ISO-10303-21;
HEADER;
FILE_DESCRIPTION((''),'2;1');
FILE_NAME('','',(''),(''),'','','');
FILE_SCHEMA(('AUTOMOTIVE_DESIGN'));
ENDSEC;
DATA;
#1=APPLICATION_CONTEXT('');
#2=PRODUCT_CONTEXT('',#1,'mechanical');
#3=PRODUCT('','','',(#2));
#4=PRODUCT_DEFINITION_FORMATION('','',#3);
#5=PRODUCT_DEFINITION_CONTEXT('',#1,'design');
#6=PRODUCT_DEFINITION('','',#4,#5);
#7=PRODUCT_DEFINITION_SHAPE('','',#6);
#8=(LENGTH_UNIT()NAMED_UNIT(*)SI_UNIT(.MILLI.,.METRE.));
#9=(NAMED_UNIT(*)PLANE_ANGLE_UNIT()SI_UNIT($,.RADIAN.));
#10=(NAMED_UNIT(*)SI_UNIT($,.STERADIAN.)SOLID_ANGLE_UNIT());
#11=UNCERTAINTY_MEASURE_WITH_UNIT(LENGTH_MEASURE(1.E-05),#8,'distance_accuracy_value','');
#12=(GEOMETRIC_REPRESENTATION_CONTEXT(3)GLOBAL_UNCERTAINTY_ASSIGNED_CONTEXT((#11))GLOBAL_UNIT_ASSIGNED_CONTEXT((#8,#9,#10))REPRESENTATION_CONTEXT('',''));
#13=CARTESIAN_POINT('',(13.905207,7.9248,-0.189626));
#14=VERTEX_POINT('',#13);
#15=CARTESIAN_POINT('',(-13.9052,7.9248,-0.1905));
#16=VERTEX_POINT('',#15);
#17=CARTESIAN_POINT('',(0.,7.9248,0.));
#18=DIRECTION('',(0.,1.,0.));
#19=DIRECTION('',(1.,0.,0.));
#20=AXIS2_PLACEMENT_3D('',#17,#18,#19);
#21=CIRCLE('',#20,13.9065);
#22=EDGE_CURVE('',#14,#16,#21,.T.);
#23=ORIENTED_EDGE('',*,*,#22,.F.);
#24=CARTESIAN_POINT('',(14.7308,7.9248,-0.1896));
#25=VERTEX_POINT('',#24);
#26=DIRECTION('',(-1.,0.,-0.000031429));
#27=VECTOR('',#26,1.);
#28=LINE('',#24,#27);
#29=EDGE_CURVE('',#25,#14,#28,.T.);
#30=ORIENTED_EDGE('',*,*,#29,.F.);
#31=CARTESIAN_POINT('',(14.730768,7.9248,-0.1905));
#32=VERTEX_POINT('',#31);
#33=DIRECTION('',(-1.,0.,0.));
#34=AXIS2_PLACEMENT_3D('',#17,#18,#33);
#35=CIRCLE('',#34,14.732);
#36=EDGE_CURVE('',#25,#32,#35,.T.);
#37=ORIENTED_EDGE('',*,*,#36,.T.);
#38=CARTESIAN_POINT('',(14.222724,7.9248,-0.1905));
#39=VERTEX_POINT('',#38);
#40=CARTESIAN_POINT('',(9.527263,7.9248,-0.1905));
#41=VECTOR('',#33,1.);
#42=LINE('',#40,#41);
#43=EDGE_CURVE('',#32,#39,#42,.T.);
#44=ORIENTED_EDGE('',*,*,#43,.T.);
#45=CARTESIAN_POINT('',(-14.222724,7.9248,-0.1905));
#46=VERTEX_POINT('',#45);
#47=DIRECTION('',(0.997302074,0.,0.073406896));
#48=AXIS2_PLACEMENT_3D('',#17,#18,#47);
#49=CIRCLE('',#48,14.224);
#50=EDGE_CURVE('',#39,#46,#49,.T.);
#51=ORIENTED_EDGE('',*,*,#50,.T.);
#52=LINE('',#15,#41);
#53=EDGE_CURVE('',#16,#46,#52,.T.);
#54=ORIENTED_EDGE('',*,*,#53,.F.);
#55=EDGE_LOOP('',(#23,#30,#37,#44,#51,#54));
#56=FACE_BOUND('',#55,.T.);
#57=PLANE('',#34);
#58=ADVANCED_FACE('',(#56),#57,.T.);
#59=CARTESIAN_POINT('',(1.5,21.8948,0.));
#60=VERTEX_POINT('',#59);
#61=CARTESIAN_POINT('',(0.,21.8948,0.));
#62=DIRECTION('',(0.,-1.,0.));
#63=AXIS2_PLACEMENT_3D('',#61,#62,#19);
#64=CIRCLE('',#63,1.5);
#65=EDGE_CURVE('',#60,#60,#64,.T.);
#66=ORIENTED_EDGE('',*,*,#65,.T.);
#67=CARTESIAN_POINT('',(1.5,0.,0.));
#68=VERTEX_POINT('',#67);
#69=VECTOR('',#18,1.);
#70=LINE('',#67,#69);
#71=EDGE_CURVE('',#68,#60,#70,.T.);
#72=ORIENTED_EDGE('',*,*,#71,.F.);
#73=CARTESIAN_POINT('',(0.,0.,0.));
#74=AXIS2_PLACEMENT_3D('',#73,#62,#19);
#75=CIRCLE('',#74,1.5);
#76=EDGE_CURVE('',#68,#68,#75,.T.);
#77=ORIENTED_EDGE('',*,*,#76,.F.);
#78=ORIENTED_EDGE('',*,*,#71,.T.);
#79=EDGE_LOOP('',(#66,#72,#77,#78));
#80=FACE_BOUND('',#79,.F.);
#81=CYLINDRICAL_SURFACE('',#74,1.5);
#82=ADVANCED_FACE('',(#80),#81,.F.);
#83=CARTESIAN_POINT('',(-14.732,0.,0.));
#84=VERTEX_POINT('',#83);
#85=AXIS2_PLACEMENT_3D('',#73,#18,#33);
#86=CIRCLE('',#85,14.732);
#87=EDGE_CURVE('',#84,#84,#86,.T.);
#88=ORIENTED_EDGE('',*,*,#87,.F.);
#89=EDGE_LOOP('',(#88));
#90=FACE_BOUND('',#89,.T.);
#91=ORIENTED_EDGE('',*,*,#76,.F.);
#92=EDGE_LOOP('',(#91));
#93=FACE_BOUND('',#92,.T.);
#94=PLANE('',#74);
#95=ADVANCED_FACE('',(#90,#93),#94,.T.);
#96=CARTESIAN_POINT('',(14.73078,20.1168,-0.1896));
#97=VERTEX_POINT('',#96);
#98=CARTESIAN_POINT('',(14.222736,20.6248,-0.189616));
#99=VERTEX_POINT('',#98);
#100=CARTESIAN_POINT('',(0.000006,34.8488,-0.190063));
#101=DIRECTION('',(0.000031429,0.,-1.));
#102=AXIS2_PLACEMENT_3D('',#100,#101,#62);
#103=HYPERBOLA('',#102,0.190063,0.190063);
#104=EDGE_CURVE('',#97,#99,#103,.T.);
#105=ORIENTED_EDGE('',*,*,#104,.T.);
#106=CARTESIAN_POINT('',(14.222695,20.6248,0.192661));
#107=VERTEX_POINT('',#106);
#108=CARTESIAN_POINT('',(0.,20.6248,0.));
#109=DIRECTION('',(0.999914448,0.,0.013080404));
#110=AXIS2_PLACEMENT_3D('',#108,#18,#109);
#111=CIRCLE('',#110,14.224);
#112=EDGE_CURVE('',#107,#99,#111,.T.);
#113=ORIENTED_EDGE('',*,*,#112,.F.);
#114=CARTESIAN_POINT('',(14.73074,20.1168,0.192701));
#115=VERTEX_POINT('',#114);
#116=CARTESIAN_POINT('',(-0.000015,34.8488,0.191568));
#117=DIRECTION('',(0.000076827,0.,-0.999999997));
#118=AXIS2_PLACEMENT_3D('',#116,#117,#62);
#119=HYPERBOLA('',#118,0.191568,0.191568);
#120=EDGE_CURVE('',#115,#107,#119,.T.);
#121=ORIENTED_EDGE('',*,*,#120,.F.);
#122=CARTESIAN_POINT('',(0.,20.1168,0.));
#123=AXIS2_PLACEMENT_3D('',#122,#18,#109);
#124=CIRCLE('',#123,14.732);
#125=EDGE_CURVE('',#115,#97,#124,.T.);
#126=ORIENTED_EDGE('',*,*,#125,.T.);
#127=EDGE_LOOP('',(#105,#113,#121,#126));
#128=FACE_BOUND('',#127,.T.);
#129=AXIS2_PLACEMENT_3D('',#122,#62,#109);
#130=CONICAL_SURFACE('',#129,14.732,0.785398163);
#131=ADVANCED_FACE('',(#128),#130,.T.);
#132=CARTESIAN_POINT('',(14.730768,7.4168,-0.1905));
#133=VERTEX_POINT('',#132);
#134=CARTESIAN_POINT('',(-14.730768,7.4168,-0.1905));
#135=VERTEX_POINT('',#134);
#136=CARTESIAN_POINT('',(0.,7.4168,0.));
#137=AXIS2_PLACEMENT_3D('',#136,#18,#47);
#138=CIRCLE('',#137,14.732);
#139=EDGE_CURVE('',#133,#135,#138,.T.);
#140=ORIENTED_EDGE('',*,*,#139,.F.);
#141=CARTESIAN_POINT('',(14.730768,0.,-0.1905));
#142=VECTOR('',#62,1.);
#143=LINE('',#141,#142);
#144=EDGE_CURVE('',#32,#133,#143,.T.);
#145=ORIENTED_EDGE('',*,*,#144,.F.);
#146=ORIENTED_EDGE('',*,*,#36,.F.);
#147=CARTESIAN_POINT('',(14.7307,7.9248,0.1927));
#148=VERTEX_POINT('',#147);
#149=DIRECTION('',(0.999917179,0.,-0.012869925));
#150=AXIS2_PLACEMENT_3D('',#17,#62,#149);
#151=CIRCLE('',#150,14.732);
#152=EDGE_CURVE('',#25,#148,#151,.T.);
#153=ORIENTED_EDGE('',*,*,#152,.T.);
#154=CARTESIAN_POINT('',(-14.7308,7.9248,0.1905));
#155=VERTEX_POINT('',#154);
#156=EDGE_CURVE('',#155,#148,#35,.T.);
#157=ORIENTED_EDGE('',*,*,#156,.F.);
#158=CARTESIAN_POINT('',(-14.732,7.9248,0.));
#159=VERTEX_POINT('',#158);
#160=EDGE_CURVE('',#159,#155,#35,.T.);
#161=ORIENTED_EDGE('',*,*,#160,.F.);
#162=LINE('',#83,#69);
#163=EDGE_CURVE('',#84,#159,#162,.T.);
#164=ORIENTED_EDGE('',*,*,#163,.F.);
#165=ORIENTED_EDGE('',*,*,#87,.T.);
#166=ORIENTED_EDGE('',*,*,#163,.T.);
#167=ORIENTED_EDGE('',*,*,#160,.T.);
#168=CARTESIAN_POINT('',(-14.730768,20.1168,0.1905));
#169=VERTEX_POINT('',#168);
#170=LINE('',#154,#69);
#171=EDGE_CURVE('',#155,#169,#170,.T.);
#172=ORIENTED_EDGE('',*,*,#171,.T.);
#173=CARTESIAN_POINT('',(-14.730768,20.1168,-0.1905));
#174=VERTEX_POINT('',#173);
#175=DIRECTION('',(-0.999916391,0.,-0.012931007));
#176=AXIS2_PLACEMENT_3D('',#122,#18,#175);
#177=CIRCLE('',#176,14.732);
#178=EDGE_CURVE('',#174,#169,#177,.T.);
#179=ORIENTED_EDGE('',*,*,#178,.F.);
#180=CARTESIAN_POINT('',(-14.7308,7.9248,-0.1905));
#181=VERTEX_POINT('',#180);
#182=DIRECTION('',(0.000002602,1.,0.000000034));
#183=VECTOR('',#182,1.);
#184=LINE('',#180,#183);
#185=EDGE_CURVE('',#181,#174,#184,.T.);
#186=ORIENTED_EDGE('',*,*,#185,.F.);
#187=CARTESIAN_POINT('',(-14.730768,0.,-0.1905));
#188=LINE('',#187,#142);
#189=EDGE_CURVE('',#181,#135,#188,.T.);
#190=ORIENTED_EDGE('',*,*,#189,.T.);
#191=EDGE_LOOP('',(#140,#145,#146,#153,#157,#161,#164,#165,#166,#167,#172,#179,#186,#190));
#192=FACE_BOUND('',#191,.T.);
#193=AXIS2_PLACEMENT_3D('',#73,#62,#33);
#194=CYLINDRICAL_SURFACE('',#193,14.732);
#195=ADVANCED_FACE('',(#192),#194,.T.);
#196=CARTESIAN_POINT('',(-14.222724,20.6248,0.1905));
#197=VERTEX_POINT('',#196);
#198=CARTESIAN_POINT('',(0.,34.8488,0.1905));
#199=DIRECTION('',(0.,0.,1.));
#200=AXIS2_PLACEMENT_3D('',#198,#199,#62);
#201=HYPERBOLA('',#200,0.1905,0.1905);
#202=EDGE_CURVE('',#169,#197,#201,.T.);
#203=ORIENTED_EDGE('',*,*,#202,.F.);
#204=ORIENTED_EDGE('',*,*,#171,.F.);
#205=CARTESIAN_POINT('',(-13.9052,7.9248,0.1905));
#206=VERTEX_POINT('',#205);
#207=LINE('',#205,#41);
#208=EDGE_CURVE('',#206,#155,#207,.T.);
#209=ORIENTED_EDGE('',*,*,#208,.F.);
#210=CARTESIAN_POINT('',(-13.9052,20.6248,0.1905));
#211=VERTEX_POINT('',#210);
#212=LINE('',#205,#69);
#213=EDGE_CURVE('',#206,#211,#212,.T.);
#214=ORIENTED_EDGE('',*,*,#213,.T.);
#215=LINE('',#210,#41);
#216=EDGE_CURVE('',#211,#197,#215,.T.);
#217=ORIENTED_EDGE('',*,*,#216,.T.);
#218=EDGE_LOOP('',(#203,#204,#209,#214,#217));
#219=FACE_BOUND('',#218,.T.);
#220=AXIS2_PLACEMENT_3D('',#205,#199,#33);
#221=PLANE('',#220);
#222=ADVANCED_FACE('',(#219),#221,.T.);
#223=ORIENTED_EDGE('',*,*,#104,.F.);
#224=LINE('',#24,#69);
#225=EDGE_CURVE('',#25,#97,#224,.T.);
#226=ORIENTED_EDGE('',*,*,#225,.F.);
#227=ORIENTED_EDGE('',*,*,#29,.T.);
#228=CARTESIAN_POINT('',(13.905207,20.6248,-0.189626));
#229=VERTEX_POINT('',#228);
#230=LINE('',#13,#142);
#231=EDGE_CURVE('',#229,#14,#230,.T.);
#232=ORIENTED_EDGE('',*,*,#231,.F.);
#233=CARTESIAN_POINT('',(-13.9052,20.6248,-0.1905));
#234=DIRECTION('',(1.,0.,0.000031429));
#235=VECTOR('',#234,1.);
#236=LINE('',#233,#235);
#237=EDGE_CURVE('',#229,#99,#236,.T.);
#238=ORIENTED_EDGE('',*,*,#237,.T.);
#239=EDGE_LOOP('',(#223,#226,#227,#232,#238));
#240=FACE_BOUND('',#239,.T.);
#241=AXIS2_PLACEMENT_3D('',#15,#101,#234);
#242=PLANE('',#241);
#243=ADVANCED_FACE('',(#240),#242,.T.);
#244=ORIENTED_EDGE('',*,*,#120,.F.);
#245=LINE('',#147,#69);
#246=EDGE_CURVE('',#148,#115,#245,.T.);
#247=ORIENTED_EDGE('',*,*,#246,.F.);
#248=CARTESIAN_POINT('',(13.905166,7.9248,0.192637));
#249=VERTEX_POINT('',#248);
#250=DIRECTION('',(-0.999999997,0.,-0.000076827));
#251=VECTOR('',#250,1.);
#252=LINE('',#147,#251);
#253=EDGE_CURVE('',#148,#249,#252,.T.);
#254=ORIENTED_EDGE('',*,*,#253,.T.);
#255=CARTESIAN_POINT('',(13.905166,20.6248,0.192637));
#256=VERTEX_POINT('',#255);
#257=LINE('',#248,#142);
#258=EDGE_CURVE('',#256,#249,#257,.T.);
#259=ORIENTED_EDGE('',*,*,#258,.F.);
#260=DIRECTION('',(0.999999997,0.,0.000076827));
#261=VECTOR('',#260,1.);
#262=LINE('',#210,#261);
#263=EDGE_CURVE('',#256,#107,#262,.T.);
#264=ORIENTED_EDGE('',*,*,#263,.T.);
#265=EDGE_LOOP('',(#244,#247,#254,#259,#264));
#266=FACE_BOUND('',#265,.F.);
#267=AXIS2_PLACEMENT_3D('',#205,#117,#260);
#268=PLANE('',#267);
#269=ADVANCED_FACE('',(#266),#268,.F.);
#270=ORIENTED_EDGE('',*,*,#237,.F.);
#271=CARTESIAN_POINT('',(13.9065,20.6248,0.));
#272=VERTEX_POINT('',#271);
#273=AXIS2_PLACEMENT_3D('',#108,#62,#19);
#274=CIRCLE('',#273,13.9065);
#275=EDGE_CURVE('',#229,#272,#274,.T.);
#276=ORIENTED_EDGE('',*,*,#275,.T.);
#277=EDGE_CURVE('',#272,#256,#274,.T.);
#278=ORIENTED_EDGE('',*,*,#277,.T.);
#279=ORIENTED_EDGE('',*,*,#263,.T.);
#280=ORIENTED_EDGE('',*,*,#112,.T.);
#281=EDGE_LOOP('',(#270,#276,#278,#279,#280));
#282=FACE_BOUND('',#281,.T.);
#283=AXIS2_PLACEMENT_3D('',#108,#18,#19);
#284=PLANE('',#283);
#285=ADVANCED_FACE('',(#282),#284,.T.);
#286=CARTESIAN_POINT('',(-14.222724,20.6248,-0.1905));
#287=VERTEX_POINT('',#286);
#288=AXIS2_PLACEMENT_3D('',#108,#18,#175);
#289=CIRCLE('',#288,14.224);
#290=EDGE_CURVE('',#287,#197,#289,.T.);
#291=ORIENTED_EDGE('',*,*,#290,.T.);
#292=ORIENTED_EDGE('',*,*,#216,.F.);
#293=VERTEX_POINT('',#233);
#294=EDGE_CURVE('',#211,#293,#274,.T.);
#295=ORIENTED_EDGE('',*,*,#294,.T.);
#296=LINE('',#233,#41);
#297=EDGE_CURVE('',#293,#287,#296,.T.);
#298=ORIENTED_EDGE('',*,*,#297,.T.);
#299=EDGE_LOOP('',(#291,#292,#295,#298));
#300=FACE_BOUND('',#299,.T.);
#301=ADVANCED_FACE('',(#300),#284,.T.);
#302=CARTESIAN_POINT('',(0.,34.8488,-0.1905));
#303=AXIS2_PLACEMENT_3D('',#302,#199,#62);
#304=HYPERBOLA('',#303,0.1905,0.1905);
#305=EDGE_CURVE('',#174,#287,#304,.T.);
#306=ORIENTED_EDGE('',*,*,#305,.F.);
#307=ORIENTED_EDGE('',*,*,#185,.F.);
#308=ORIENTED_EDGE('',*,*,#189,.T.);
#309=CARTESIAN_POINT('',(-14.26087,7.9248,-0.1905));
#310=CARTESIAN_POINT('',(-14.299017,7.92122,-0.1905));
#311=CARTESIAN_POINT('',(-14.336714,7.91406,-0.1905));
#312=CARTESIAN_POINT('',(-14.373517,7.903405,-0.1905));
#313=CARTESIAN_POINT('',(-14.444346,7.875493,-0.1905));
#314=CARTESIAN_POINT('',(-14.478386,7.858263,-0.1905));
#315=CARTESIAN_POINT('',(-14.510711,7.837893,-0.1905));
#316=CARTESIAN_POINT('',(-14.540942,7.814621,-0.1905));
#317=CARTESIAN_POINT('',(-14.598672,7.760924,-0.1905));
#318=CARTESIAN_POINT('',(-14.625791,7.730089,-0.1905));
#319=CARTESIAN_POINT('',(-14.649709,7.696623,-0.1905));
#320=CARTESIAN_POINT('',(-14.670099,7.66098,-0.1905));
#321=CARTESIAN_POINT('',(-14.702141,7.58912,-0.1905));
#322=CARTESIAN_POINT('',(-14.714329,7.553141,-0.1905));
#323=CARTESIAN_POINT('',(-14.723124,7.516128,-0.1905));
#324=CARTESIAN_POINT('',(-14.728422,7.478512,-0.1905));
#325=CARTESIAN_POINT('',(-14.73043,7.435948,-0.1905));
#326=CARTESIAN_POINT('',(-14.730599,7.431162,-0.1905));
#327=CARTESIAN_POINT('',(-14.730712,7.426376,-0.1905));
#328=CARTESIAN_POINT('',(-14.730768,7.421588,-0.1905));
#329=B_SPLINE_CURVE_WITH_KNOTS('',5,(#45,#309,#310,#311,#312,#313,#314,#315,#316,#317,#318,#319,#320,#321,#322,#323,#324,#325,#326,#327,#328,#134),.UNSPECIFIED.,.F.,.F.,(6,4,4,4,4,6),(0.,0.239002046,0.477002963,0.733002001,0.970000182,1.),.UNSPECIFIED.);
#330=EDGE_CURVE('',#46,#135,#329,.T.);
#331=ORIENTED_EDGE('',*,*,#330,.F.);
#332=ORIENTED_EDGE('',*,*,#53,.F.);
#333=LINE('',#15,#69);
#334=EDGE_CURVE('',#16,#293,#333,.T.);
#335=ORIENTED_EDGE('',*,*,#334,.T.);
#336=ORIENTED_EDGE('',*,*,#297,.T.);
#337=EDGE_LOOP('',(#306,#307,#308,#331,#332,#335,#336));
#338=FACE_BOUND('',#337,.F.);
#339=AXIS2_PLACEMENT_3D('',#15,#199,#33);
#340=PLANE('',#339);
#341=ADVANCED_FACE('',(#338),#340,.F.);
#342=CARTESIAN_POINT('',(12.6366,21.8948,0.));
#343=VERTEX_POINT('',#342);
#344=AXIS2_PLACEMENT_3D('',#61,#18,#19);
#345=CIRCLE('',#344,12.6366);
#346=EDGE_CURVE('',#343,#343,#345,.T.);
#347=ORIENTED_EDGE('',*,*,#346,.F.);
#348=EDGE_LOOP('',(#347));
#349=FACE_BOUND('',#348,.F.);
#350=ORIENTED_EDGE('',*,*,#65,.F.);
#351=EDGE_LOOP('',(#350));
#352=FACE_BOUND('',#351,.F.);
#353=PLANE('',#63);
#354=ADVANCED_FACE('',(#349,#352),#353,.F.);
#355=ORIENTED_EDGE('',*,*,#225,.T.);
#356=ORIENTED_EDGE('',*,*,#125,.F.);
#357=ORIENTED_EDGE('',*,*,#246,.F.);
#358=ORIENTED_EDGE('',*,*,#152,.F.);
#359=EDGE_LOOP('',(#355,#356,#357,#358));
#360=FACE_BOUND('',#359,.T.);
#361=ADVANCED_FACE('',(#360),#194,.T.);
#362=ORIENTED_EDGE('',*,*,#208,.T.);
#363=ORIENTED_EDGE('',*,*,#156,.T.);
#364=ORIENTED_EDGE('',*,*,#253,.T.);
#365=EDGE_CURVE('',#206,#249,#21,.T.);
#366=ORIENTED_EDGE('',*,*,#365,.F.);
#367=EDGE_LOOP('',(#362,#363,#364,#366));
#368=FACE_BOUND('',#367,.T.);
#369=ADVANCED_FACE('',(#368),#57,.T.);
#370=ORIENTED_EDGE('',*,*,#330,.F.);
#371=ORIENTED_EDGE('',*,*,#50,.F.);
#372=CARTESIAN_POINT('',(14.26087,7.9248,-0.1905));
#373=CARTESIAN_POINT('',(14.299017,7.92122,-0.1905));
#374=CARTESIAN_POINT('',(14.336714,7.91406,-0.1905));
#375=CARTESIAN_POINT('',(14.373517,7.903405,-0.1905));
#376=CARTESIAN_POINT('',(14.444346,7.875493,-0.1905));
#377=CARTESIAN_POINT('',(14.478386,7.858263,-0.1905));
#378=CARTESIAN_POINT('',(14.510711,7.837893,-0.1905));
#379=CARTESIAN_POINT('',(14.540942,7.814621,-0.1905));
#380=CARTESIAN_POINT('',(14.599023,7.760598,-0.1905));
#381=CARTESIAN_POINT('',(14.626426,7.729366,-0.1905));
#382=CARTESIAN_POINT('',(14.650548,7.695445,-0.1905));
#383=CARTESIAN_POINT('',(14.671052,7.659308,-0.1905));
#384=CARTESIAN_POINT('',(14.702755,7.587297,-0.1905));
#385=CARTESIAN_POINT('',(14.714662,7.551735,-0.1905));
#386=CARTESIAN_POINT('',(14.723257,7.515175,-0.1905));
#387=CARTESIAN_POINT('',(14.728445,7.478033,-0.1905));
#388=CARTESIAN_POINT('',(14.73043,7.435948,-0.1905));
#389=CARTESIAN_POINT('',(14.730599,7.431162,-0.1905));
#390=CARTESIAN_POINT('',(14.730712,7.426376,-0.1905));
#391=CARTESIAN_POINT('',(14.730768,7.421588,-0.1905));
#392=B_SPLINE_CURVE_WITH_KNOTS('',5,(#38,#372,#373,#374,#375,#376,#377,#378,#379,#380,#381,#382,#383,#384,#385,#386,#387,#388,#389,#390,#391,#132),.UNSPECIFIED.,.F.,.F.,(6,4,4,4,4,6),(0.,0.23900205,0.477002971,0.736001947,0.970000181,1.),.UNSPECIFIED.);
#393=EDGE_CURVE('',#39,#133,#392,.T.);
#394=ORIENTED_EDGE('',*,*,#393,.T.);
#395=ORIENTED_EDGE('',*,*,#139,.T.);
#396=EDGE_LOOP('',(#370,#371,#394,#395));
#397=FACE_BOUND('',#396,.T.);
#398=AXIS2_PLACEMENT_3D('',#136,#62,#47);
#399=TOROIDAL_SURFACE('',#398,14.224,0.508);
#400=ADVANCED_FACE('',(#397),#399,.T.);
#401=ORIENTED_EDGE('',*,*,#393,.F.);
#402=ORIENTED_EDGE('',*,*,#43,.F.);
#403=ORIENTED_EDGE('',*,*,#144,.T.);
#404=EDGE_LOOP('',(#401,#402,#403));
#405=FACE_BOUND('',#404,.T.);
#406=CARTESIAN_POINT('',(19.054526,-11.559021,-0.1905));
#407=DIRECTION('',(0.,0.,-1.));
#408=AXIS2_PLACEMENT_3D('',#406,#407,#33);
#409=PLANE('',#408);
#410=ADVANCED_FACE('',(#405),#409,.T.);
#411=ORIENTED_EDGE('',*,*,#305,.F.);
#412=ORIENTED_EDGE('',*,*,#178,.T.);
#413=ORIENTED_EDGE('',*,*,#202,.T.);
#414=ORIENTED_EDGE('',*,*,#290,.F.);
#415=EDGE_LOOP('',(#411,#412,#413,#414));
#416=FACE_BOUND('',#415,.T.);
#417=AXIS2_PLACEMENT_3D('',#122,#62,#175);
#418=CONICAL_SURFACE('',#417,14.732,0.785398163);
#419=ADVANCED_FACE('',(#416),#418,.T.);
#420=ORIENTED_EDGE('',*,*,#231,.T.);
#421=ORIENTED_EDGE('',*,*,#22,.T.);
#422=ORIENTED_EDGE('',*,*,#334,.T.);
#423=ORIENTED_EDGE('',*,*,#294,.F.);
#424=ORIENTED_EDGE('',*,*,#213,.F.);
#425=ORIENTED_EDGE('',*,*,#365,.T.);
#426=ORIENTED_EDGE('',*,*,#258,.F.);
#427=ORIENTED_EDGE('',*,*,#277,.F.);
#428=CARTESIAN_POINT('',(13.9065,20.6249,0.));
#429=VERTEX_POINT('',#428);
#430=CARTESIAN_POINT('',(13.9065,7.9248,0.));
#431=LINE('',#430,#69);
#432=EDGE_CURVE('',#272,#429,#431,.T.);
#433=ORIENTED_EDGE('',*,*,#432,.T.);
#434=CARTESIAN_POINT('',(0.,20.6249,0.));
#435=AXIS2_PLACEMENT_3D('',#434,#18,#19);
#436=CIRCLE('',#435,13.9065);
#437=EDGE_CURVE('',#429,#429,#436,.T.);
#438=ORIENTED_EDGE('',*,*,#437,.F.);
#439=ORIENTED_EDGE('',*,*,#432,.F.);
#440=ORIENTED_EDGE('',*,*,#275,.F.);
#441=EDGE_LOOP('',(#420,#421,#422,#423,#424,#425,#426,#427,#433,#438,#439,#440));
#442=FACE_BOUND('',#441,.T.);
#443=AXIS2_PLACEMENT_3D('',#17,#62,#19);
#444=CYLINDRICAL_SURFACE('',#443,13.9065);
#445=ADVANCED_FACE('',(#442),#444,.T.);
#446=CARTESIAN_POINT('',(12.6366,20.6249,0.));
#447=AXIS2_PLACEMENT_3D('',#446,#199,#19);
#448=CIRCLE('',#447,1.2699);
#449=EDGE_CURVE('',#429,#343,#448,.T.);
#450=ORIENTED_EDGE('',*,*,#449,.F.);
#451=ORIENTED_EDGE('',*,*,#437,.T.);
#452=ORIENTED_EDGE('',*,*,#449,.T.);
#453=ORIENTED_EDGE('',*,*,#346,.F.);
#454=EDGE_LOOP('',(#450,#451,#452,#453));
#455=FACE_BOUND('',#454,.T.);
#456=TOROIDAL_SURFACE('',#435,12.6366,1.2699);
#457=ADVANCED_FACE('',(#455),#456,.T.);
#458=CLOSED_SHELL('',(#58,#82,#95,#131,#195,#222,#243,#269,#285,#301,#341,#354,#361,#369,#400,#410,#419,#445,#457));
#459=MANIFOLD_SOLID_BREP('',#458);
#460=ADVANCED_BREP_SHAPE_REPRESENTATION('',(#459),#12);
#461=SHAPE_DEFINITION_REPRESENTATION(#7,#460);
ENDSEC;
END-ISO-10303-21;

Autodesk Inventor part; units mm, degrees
ref_plane "YZ Plane" through (0, 0, 0) normal (1, 0, 0) x (0, 1, 0)
ref_plane "XZ Plane" through (0, 0, 0) normal (0, 1, 0) x (-1, 0, 0)
ref_plane "XY Plane" through (0, 0, 0) normal (0, 0, 1) x (1, 0, 0)
sketch "Sketch1" plane through (0, 0, 0) normal (0, 1, 0) x (-1, 0, 0)
  circle A0 centre (0, 0) radius 14.732
  dimension "d0" = 29.464
extrude "Extrusion1" add sketch "Sketch1" along normal blind 7.9248
sketch "Sketch2" plane through (0, 7.9248, 0) normal (0, 1, 0) x (1, 0, 0)
  circle A0 centre (0, 0) radius 14.732 projected
  circle A1 centre (0, 0) radius 13.9065
  dimension "d3" = 27.813
extrude "Extrusion2" add sketch "Sketch2" along normal blind 13.97 contours A1
sketch "Sketch4" plane through (0, 7.9248, 0) normal (0, 1, 0) x (1, 0, 0)
  circle A0 centre (0, 0) radius 13.9065 projected
  circle A1 centre (0, 0) radius 14.732 projected
  circle A2 centre (0, 0) radius 13.9065
  circle A3 centre (0, 0) radius 14.732
  line L0 (-13.905, 0.2046) -> (-13.0794, 0.2046) construction
  line L1 (-13.9052, 0.1905) -> (-14.7308, 0.1905)
  line L2 (-13.9052, 0.1905) -> (-13.0796, 0.1905) construction
  line L3 (-13.9052, -0.1905) -> (-14.7308, -0.1905)
  line L4 (-13.9052, -0.1905) -> (-13.0796, -0.1905) construction
  line L5 (-13.9052, 0.1905) -> (14.7308, 0.1896)
  line L6 (-13.9052, -0.1905) -> (14.7307, -0.1927)
  dimension "d7" = 180
  dimension "d8" = 180
extrude "Extrusion3" add sketch "Sketch4" along normal blind 12.7 contours L5 A0 L6 | A0 L3 A1 L1 | L5 A1 L6 A0
chamfer "Chamfer1" distance 0.508 angle 45 1 edges at (14.732, 20.6248, 0.0015)
chamfer "Chamfer2" distance 0.508 angle 45 1 edges at (-14.732, 20.6248, 0)
fillet "Fillet1" radius 1.27 1 edges at (-13.9065, 21.8948, 0)
fillet "Fillet2" radius 0.508 1 edges at (0.0004, 7.9248, -14.732)
sketch "Sketch5" plane through (0, 21.8948, 0) normal (0, 1, 0) x (1, 0, 0)
  circle A0 centre (0, 0) radius 12.6365 projected
  circle A1 centre (0, 0) radius 7.9375
  dimension "d19" = 15.875
extrude "Extrusion4" cut sketch "Sketch5" against normal blind 25.4 contours A1
sketch "Sketch6" plane through (0, 0, 0) normal (0, -1, 0) x (1, 0, 0)
  circle A0 centre (0, 0) radius 7.9375 projected
  circle A1 centre (0, 0) radius 14.732 projected
  circle A2 centre (0, 0) radius 7.9375
  circle A3 centre (0, 0) radius 1.5
  dimension "d22" = 3
extrude "Extrusion5" add sketch "Sketch6" against normal blind 21.8948 contours A0
properties part number "Pipe Cap 3 - Kapton Tape"
